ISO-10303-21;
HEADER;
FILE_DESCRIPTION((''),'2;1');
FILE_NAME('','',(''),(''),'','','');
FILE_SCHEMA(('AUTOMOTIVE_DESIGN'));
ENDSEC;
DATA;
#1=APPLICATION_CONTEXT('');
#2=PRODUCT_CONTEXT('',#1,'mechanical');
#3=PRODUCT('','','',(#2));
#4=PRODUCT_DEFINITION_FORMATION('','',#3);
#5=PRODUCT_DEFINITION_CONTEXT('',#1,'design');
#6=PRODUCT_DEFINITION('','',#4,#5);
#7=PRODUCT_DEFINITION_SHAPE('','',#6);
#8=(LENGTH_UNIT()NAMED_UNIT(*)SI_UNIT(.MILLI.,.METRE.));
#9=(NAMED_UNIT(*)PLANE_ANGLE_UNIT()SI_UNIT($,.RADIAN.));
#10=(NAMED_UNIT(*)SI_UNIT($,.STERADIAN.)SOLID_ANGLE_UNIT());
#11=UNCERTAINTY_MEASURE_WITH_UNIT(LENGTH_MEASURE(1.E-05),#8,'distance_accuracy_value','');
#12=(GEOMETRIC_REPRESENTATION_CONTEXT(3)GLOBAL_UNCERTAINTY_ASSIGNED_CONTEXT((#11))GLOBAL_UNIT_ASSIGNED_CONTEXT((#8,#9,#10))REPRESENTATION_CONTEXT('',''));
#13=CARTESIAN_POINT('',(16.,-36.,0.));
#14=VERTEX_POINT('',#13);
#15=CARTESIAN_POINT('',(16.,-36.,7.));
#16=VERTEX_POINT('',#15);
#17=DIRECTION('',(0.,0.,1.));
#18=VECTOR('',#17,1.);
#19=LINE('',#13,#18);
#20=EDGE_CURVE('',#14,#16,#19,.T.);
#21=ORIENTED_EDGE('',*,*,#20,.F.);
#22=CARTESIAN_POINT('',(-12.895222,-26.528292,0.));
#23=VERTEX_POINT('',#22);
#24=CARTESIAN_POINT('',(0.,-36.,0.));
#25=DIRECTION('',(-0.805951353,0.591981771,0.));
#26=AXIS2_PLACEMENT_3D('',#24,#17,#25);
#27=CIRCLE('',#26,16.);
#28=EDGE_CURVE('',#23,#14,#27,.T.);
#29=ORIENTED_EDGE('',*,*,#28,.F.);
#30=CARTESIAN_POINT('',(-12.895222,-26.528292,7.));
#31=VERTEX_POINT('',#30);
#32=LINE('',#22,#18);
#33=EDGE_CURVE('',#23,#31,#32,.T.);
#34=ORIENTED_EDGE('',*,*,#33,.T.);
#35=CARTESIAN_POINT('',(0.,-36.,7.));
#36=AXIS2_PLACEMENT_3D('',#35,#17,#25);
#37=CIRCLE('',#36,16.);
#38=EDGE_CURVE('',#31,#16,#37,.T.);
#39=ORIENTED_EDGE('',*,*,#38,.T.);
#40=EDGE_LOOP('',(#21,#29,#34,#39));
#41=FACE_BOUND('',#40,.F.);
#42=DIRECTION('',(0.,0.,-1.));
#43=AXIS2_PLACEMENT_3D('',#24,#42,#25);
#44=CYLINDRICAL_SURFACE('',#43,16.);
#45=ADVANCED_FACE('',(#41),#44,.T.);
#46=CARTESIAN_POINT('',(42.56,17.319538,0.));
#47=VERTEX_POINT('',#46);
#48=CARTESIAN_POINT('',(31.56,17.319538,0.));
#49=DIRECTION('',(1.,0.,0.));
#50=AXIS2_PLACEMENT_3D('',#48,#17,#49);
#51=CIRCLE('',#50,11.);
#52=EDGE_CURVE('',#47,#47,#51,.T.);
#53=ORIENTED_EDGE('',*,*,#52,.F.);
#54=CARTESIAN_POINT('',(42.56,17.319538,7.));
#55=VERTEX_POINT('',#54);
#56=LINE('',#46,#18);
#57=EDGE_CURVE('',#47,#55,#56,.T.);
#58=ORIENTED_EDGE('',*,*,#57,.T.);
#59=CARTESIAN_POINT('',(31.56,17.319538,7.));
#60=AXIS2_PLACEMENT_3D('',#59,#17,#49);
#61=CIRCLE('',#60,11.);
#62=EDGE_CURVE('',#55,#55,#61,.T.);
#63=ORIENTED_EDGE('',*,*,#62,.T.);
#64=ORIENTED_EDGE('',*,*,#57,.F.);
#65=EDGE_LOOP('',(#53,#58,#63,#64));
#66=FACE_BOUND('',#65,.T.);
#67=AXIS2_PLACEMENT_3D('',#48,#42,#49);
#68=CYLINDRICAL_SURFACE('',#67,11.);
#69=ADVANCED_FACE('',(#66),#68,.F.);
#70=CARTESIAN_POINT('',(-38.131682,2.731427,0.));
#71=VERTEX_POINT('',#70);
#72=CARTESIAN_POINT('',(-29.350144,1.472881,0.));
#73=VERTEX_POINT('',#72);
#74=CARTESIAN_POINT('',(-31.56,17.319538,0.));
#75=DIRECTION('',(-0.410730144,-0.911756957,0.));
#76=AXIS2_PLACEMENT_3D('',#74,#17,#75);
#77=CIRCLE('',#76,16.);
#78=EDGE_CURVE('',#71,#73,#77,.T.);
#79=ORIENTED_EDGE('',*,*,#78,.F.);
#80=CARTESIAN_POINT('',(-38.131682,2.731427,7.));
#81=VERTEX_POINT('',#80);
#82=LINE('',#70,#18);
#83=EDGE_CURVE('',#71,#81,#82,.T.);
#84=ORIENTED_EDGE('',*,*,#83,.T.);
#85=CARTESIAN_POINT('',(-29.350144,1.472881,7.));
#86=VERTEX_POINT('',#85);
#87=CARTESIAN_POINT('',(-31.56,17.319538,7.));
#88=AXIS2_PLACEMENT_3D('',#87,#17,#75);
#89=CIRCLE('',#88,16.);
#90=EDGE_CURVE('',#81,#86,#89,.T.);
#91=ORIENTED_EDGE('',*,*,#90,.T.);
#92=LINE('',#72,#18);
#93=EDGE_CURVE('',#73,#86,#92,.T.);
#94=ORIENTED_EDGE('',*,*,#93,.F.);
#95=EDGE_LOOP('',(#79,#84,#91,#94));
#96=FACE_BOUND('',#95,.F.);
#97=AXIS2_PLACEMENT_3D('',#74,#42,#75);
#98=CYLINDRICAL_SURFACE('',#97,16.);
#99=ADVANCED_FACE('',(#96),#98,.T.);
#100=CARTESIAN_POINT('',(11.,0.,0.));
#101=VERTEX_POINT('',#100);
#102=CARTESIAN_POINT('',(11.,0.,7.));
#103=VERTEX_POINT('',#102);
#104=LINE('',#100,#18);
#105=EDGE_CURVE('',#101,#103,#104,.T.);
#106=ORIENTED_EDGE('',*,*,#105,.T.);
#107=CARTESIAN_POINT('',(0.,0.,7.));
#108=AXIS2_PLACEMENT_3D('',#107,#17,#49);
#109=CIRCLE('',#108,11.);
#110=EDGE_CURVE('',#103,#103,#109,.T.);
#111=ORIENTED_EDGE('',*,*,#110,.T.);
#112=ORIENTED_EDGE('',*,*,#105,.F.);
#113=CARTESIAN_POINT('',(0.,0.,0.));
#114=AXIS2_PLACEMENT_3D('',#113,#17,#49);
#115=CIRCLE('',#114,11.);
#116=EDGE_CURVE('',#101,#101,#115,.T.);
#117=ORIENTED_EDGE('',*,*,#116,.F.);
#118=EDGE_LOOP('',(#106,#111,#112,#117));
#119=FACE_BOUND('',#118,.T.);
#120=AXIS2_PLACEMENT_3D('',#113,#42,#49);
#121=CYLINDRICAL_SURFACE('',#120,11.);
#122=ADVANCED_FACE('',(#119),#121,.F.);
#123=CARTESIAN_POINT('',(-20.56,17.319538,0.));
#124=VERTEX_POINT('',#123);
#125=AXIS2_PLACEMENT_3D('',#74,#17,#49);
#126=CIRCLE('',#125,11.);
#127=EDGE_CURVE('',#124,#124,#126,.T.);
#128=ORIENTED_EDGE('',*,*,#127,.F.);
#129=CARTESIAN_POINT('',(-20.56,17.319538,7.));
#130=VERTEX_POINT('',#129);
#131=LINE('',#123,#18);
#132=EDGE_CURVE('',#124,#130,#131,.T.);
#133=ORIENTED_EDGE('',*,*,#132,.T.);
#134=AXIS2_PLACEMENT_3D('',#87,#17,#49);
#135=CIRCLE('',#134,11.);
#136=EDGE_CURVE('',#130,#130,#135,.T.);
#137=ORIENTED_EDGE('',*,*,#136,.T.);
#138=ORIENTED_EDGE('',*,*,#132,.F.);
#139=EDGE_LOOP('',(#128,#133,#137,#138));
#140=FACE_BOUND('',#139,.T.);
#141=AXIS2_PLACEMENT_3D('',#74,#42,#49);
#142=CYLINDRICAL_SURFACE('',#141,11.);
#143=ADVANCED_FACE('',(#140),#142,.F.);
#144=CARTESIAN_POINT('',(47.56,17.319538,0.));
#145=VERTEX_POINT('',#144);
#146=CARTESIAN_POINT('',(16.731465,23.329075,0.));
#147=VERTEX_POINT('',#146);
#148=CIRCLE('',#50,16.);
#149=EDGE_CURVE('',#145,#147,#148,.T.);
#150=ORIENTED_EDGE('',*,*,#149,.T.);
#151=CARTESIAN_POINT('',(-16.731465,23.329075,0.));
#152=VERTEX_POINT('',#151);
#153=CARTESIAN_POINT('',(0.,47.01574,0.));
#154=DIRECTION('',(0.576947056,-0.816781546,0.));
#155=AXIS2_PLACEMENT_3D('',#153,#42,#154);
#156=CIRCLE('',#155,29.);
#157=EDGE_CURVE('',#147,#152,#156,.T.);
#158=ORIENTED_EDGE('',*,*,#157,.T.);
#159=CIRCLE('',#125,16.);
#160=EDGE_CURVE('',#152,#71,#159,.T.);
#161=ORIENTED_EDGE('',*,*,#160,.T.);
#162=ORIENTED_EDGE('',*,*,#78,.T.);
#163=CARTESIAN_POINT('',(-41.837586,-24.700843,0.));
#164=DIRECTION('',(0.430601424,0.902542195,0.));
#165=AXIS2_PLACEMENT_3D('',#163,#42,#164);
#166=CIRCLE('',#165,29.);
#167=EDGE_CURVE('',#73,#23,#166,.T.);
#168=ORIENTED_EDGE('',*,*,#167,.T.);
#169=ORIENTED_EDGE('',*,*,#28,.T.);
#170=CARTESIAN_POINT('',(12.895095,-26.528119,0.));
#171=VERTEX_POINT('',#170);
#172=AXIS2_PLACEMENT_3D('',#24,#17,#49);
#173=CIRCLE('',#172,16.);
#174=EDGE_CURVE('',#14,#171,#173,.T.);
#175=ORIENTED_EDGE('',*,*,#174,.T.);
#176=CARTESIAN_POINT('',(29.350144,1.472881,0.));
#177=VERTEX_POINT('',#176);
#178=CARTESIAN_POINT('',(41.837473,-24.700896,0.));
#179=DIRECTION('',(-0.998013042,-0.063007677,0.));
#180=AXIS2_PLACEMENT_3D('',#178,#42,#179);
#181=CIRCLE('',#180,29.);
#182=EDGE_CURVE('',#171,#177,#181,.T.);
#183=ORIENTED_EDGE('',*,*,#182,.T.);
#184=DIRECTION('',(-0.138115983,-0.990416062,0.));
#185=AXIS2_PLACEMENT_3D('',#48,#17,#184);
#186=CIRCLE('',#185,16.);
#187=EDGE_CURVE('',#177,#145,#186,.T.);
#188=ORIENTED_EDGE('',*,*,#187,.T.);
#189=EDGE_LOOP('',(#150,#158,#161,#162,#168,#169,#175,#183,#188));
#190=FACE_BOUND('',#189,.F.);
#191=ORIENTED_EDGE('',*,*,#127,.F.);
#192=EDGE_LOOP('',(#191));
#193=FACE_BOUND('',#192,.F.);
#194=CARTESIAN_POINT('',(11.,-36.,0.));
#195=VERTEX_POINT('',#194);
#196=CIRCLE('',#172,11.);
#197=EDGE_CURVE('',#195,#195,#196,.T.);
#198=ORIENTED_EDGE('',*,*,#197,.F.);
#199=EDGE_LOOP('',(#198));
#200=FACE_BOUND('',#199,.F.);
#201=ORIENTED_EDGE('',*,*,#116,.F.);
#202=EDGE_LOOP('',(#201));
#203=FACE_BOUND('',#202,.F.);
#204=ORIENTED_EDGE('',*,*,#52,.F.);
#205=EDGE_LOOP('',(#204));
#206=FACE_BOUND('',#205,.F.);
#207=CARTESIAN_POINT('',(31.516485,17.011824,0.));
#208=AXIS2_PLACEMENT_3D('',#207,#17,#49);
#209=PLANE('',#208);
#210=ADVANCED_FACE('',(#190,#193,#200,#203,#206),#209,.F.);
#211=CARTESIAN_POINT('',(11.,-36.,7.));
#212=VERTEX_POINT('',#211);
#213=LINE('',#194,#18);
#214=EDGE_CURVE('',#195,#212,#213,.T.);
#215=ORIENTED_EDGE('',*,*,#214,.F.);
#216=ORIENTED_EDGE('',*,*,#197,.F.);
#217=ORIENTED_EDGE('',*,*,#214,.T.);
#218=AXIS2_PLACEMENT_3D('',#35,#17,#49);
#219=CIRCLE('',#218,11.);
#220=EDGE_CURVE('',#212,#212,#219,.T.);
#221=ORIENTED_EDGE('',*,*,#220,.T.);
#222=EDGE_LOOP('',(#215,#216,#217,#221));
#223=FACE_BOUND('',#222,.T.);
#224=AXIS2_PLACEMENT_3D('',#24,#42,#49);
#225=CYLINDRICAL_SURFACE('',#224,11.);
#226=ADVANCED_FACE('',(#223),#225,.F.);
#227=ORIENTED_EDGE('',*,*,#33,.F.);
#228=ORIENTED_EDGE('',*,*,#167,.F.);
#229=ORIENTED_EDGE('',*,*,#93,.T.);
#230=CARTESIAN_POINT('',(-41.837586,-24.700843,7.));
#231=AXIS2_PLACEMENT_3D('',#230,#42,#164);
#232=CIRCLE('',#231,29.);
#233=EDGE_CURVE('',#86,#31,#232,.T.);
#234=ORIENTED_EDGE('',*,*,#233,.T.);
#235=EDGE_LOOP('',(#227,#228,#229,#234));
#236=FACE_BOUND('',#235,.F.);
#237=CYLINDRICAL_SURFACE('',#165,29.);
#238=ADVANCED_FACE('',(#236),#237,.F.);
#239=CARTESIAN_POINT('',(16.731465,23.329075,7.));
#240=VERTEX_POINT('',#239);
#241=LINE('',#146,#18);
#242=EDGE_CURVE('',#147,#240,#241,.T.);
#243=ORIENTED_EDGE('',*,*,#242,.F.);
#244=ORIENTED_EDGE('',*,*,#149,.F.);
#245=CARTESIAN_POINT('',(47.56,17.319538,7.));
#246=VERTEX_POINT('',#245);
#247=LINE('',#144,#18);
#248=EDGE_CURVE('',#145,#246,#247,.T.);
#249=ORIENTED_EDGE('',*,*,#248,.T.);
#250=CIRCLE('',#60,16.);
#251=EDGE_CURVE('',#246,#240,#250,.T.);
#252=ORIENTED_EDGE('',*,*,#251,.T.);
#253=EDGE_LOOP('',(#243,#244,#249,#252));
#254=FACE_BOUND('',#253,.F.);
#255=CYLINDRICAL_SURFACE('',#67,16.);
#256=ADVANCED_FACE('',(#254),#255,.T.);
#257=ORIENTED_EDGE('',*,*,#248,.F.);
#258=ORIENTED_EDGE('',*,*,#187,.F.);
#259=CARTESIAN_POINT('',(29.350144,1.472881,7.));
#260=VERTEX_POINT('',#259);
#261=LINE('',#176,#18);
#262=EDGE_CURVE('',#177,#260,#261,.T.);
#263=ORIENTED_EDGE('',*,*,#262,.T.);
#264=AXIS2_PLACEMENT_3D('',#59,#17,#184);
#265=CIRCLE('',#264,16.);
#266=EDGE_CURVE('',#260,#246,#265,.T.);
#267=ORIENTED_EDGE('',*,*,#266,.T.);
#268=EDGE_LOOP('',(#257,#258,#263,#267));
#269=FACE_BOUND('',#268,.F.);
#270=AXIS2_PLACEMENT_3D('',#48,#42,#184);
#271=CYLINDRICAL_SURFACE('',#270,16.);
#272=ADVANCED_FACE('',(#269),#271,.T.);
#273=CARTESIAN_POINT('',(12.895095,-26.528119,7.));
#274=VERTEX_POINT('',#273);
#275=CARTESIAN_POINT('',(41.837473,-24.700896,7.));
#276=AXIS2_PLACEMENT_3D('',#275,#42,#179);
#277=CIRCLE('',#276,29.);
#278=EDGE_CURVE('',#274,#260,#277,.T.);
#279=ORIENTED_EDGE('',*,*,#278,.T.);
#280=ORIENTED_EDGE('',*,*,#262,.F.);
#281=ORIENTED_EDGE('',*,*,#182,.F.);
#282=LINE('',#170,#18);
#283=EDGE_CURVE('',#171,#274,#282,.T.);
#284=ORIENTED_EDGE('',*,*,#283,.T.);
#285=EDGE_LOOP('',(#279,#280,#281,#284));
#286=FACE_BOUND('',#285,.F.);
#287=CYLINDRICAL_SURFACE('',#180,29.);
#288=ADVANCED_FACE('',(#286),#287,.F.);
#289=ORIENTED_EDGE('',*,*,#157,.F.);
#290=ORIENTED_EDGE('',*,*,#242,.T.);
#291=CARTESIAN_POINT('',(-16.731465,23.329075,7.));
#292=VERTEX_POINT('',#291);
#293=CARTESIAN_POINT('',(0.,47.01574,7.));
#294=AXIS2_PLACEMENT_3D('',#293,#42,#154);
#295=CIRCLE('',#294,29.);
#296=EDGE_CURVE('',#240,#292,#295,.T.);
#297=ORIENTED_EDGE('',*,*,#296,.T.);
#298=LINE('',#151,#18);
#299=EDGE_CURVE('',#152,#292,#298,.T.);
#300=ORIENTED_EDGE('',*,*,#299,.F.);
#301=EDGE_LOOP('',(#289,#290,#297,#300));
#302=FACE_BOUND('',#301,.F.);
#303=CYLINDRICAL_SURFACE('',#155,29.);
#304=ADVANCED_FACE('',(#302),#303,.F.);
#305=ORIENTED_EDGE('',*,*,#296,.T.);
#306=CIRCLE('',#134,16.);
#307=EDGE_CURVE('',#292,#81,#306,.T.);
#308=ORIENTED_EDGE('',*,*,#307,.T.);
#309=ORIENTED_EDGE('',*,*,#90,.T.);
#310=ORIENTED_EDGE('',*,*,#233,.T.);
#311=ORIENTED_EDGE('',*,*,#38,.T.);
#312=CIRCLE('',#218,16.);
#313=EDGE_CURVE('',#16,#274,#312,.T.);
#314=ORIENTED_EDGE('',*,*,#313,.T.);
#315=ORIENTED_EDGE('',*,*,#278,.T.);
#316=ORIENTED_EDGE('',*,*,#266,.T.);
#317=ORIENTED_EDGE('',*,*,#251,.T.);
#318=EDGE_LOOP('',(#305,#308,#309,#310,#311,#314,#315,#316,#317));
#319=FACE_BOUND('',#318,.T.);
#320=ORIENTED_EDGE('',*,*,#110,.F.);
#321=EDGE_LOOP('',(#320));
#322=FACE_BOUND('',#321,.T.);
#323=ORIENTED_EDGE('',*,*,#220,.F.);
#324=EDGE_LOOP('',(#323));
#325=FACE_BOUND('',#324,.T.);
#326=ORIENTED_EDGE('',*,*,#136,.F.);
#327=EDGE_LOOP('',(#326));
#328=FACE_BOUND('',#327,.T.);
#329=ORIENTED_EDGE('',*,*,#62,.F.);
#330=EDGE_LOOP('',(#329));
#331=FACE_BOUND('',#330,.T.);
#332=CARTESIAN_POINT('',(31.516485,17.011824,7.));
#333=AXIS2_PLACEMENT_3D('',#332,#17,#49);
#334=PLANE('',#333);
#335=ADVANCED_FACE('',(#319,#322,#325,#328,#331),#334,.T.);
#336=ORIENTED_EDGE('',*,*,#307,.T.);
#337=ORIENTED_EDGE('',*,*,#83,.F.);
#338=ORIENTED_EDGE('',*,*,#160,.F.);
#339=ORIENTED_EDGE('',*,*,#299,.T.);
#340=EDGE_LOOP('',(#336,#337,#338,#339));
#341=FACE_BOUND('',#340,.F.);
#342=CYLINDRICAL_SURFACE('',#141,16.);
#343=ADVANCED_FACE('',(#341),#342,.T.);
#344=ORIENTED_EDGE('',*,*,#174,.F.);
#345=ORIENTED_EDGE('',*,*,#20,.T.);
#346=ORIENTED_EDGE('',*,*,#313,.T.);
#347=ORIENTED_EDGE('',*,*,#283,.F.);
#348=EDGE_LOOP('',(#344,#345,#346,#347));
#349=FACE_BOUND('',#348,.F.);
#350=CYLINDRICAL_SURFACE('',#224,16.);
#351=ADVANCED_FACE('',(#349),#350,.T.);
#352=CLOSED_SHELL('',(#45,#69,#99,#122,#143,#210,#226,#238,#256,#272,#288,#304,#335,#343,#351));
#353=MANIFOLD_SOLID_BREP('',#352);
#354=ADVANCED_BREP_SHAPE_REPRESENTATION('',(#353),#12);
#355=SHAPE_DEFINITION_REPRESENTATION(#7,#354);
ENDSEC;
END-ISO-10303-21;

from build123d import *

# Parameters (mm, degrees)
F0_R     = 11
F1_DEPTH = 7
F2_DEPTH = 7


# Not quite as in the source:
# - a feature names something its author has since deleted; it is built from what else it names


with BuildPart() as f1:
    # F0 (on Top) → F1 (new body)
    with BuildSketch(Plane.XY):
        with BuildLine():
            ThreePointArc((29.3501442774, 1.4728811124), (17.7035935394, 9.3195381001), (16.7314646223, 23.3290753994))
            ThreePointArc((16.7314646223, 23.3290753994), (0, 18.0157402468), (-16.7314646223, 23.3290753994))
            ThreePointArc((-16.7314646223, 23.3290753994), (-15.8555966996, 20.3808641164), (-15.56, 17.3195381001))
            ThreePointArc((-15.56, 17.3195381001), (-19.4902507988, 6.8161503505), (-29.3501442774, 1.4728811124))
            ThreePointArc((-29.3501442774, 1.4728811124), (-16.8351135056, -10.0081099666), (-12.8952216464, -26.5282916699))
            ThreePointArc((-12.8952216464, -26.5282916699), (-0.0001071921, -20.0000000004), (12.8950947338, -26.5281188876))
            ThreePointArc((12.8950947338, -26.5281188876), (16.8350899961, -10.0080120701), (29.3501442774, 1.4728811124))
        make_face()
        Circle(F0_R, mode=Mode.SUBTRACT)
    extrude(amount=F1_DEPTH)

    # F0 (on Top) → F2 (join)
    with BuildSketch(Plane.XY):
        with BuildLine():
            ThreePointArc((29.3501442774, 1.4728811124), (42.0633877496, 5.2497888988), (47.56, 17.3195381001))
            ThreePointArc((47.56, 17.3195381001), (34.6213260163, 33.0239414005), (16.7314646223, 23.3290753994))
            ThreePointArc((16.7314646223, 23.3290753994), (17.7035935394, 9.3195381001), (29.3501442774, 1.4728811124))
        make_face()
        with Locations((31.56, 17.3195381001)):
            Circle(F0_R, mode=Mode.SUBTRACT)
        with BuildLine():
            ThreePointArc((-15.56, 17.3195381001), (-15.8555966996, 20.3808641164), (-16.7314646223, 23.3290753994))
            ThreePointArc((-16.7314646223, 23.3290753994), (-42.6554805123, 28.8473441446), (-38.1316823001, 2.7314267848))
            ThreePointArc((-38.1316823001, 2.7314267848), (-33.8298826127, 1.4813679746), (-29.3501442774, 1.4728811124))
            ThreePointArc((-29.3501442774, 1.4728811124), (-19.4902507988, 6.8161503505), (-15.56, 17.3195381001))
        make_face()
        with Locations((-31.56, 17.3195381001)):
            Circle(F0_R, mode=Mode.SUBTRACT)
        with BuildLine():
            ThreePointArc((16, -36), (15.2039717794, -31.0161017135), (12.8950947338, -26.5281188876))
            ThreePointArc((12.8950947338, -26.5281188876), (-0.0001071921, -20.0000000004), (-12.8952216464, -26.5282916699))
            ThreePointArc((-12.8952216464, -26.5282916699), (-4.9837964273, -51.2040051687), (16, -36))
        make_face()
        with Locations((0, -36)):
            Circle(F0_R, mode=Mode.SUBTRACT)
    extrude(amount=F2_DEPTH)


solid = f1.part
